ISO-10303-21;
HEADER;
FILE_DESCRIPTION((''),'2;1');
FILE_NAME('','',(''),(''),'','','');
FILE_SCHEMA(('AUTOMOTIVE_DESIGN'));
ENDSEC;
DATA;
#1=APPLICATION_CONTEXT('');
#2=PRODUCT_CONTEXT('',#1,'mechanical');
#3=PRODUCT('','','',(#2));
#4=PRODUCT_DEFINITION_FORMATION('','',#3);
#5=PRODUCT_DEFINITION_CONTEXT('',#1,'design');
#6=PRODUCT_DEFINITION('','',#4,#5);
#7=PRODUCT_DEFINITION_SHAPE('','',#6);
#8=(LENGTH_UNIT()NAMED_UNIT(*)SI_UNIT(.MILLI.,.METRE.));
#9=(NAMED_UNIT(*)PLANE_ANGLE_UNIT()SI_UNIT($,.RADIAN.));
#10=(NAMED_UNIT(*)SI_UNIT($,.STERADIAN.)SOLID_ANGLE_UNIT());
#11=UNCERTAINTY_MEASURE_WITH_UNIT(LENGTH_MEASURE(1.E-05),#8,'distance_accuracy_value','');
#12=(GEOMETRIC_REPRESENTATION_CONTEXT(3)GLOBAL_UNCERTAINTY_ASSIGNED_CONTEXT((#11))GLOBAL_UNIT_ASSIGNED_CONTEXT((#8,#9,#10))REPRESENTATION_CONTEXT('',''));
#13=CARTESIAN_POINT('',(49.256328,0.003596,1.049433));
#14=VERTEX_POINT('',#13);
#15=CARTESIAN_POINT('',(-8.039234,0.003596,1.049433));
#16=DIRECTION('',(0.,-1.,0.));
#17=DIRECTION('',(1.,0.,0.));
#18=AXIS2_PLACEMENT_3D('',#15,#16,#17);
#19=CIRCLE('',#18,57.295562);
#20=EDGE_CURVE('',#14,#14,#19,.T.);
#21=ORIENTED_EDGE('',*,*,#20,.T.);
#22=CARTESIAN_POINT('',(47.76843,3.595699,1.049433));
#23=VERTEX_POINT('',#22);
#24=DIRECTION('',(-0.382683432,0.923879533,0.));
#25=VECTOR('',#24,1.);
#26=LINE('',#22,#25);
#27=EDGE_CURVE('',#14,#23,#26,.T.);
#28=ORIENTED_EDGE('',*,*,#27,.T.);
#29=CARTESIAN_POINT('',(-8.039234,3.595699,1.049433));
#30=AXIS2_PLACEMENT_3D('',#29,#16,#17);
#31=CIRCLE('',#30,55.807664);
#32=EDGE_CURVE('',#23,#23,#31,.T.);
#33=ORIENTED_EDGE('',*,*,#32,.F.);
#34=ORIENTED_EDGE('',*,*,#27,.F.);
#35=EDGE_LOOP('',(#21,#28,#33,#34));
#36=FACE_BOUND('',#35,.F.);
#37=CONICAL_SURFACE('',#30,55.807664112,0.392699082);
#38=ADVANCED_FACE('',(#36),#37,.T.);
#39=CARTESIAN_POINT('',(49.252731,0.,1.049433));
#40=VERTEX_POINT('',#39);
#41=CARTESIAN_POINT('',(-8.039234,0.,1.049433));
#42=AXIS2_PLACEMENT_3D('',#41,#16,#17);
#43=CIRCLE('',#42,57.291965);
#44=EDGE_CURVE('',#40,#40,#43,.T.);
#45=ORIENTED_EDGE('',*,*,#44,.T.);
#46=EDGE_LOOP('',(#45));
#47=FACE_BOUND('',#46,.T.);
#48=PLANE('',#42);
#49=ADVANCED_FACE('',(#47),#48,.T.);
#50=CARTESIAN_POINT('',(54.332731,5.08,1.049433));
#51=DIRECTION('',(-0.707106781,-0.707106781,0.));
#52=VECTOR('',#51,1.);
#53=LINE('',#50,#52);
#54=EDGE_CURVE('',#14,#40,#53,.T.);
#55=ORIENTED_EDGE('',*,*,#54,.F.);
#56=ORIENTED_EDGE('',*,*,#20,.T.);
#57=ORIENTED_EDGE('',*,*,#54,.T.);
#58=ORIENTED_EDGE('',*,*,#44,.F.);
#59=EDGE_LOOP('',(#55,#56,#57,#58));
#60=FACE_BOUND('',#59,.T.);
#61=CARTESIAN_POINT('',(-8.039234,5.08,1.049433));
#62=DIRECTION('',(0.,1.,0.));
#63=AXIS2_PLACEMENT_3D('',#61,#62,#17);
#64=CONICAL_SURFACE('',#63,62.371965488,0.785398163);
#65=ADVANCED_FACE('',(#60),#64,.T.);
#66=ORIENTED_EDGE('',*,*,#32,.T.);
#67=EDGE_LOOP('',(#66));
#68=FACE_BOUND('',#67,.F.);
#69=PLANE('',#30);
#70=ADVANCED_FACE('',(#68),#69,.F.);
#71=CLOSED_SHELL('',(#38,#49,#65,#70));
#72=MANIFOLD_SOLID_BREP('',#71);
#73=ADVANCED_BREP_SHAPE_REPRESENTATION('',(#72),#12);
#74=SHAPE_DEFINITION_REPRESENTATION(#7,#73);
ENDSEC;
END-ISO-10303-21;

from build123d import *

# Parameters (mm, degrees)
F0_R     = 62.3719654877
F1_DEPTH = 3.5956986248
F3_SIZE  = 5.08


# Not quite as in the source:
# - a fillet or chamfer that OpenCascade refuses, or shapes differently, is made with other operations: its cross-section is extruded or revolved along the edge and cut away or added


with BuildPart() as f1:
    # F0 (on Front) → F1 (new body)
    with BuildSketch(Plane.XZ):
        with Locations((-8.0392340643, 1.049432549)):
            Circle(F0_R)
    extrude(amount=-F1_DEPTH)

    # F2: chamfer of 5.08 on 1 edges, made by hand

    # F2_s1 → F2_t2 (revolve, cut)
    with BuildSketch(Plane.XY.offset(1.049432549)):
        Polygon((54.3327314234, 5.08), (49.2527314234, 0), (54.3327314234, 0), align=None)
    revolve(axis=Axis((-8.0392340643, 0, 1.049432549), (0, -1, 0)), mode=Mode.SUBTRACT)

    # F3
    f3_edges = [f1.edges().sort_by_distance(p)[0] for p in [
        (-68.926898, 3.595699, 1.049433),
    ]]
    chamfer(f3_edges, length=F3_SIZE)


solid = f1.part
